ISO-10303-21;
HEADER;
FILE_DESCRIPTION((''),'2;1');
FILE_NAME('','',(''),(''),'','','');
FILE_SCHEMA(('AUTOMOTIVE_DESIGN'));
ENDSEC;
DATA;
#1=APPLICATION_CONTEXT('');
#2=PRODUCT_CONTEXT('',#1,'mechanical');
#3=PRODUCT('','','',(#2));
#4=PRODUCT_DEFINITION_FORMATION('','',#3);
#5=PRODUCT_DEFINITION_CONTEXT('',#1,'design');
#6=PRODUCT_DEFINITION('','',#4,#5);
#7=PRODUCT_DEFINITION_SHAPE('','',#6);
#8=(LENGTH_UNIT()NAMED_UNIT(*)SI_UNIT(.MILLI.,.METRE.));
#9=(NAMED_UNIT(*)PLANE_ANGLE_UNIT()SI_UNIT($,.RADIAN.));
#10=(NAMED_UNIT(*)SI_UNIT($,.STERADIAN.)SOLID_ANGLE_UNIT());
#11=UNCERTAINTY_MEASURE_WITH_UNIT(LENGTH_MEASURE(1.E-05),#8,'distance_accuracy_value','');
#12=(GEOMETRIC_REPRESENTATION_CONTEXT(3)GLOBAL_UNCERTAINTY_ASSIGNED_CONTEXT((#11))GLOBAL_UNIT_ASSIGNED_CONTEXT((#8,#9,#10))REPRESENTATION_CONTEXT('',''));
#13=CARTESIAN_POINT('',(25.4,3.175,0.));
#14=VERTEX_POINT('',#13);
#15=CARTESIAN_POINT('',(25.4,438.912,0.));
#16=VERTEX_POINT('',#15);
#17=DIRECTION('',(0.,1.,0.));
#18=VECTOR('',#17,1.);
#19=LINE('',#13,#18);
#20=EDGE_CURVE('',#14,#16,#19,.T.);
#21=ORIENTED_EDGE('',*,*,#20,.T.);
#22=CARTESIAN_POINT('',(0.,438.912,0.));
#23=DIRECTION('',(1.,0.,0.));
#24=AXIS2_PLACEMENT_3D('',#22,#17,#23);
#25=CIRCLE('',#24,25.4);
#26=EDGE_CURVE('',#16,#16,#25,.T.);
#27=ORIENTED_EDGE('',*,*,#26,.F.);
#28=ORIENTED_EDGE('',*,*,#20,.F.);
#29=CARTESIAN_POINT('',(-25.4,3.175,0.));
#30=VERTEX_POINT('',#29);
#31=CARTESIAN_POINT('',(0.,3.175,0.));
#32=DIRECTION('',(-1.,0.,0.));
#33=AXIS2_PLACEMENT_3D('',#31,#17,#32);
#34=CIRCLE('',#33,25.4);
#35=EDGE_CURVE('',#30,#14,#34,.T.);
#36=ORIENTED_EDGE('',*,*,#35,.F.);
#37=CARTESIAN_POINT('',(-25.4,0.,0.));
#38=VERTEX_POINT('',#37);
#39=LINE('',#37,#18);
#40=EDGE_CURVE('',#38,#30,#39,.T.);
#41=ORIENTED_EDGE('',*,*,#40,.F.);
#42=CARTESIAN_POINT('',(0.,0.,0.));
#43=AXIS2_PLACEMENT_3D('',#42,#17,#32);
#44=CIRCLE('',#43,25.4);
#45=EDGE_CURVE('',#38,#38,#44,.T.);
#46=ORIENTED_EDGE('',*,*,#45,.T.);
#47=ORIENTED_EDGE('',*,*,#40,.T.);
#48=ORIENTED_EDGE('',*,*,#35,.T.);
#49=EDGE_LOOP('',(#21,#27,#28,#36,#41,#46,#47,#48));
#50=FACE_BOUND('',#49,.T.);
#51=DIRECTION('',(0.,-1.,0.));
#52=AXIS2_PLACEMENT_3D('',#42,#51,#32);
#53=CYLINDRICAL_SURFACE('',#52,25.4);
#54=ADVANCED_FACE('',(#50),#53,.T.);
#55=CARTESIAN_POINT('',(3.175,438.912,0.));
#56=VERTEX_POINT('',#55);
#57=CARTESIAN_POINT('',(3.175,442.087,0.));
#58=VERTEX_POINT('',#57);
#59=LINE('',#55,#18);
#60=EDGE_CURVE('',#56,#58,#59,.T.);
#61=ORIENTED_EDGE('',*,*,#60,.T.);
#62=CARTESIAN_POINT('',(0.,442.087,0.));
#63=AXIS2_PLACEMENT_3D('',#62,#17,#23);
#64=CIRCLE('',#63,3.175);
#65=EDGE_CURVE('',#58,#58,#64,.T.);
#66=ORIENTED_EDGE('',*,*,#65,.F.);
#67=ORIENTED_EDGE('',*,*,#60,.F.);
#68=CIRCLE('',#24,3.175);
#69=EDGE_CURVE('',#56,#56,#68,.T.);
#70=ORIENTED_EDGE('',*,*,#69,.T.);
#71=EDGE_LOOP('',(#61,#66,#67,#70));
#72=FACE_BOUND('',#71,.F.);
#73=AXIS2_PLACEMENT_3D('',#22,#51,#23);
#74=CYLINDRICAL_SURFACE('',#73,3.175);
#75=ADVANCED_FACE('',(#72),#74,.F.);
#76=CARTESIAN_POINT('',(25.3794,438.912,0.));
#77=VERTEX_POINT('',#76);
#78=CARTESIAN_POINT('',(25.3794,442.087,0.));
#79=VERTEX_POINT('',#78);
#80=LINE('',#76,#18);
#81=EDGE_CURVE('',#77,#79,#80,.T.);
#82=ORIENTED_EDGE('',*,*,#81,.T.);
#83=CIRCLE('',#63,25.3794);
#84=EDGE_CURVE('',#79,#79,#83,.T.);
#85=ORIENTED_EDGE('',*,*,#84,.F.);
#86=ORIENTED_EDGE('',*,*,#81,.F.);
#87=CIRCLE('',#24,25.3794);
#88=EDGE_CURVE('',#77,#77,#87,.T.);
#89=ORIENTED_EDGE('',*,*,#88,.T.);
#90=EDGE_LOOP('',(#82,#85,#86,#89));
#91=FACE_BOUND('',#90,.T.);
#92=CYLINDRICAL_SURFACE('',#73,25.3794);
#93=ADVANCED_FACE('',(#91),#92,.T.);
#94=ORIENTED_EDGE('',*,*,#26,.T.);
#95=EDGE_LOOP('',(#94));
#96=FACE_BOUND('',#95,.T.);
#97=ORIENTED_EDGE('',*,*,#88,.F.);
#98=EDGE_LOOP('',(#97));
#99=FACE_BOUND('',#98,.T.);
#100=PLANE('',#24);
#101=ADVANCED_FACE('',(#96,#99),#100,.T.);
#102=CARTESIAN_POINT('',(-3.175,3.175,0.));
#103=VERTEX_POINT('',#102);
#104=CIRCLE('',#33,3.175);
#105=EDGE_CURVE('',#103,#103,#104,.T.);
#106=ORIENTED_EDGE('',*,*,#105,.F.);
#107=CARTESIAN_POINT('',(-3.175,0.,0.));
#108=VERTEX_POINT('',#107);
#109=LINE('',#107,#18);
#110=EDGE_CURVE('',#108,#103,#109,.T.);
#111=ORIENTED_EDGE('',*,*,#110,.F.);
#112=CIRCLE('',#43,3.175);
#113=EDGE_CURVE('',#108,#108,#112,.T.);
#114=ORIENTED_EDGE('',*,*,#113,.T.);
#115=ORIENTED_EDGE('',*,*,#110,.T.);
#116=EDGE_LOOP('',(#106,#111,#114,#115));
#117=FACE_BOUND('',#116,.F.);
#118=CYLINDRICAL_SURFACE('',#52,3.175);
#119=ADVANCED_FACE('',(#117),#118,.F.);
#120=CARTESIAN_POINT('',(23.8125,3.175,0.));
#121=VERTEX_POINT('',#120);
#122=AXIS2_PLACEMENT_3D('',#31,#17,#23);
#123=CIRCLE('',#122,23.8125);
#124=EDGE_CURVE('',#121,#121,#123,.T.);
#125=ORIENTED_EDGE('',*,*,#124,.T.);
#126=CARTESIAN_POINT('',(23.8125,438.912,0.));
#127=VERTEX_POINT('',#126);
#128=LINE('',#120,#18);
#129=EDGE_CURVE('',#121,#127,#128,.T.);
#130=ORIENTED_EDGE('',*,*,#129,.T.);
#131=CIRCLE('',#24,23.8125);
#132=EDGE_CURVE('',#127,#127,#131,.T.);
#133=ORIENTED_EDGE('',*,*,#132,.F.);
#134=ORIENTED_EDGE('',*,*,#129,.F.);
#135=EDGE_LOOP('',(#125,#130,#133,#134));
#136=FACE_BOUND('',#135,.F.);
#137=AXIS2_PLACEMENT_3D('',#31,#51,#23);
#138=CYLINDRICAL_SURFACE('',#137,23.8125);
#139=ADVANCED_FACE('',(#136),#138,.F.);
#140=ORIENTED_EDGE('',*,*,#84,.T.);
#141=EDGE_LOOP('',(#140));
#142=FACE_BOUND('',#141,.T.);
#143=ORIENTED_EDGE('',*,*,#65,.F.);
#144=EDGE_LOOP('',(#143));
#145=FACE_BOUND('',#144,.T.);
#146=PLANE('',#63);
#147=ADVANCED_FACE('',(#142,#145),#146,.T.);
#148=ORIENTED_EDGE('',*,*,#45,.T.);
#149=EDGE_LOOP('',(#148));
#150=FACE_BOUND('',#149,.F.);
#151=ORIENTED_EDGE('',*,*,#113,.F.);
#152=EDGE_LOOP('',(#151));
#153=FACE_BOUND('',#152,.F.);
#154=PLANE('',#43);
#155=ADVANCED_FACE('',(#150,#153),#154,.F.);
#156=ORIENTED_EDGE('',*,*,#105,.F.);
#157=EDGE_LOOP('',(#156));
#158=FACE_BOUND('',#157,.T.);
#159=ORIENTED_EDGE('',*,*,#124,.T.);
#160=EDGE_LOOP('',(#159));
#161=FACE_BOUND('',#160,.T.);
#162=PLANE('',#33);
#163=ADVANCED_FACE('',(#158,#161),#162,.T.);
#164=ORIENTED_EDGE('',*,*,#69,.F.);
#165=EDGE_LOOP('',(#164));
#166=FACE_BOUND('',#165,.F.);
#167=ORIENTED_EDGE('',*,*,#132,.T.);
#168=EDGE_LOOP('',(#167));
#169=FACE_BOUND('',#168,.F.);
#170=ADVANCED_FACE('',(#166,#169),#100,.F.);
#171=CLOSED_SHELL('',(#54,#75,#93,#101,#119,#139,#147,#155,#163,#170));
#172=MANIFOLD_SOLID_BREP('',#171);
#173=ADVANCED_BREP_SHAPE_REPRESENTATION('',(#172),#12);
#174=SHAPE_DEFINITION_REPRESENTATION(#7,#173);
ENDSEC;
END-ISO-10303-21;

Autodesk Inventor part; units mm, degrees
ref_plane "YZ Plane" through (0, 0, 0) normal (1, 0, 0) x (0, 1, 0)
ref_plane "XZ Plane" through (0, 0, 0) normal (0, 1, 0) x (-1, 0, 0)
ref_plane "XY Plane" through (0, 0, 0) normal (0, 0, 1) x (1, 0, 0)
sketch "Sketch1" plane through (0, 0, 0) normal (0, 1, 0) x (-1, 0, 0)
  circle A0 centre (0, 0) radius 25.4
  circle A1 centre (0, 0) radius 3.175
  dimension "d0" = 50.8
  dimension "d1" = 6.35
extrude "Extrusion1" add sketch "Sketch1" along normal blind 3.175
sketch "Sketch2" plane through (0, 3.175, 0) normal (0, 1, 0) x (1, 0, 0)
  circle A0 centre (0, 0) radius 23.8125
  circle A1 centre (0, 0) radius 25.4
  dimension "d4" = 47.625
extrude "Extrusion2" add sketch "Sketch2" along normal blind 435.737
sketch "Sketch3" plane through (0, 438.912, 0) normal (0, 1, 0) x (1, 0, 0)
  circle A0 centre (0, 0) radius 25.3794
  circle A1 centre (0, 0) radius 3.175
extrude "Extrusion3" add sketch "Sketch3" along normal blind 3.175
properties part number "roller"
